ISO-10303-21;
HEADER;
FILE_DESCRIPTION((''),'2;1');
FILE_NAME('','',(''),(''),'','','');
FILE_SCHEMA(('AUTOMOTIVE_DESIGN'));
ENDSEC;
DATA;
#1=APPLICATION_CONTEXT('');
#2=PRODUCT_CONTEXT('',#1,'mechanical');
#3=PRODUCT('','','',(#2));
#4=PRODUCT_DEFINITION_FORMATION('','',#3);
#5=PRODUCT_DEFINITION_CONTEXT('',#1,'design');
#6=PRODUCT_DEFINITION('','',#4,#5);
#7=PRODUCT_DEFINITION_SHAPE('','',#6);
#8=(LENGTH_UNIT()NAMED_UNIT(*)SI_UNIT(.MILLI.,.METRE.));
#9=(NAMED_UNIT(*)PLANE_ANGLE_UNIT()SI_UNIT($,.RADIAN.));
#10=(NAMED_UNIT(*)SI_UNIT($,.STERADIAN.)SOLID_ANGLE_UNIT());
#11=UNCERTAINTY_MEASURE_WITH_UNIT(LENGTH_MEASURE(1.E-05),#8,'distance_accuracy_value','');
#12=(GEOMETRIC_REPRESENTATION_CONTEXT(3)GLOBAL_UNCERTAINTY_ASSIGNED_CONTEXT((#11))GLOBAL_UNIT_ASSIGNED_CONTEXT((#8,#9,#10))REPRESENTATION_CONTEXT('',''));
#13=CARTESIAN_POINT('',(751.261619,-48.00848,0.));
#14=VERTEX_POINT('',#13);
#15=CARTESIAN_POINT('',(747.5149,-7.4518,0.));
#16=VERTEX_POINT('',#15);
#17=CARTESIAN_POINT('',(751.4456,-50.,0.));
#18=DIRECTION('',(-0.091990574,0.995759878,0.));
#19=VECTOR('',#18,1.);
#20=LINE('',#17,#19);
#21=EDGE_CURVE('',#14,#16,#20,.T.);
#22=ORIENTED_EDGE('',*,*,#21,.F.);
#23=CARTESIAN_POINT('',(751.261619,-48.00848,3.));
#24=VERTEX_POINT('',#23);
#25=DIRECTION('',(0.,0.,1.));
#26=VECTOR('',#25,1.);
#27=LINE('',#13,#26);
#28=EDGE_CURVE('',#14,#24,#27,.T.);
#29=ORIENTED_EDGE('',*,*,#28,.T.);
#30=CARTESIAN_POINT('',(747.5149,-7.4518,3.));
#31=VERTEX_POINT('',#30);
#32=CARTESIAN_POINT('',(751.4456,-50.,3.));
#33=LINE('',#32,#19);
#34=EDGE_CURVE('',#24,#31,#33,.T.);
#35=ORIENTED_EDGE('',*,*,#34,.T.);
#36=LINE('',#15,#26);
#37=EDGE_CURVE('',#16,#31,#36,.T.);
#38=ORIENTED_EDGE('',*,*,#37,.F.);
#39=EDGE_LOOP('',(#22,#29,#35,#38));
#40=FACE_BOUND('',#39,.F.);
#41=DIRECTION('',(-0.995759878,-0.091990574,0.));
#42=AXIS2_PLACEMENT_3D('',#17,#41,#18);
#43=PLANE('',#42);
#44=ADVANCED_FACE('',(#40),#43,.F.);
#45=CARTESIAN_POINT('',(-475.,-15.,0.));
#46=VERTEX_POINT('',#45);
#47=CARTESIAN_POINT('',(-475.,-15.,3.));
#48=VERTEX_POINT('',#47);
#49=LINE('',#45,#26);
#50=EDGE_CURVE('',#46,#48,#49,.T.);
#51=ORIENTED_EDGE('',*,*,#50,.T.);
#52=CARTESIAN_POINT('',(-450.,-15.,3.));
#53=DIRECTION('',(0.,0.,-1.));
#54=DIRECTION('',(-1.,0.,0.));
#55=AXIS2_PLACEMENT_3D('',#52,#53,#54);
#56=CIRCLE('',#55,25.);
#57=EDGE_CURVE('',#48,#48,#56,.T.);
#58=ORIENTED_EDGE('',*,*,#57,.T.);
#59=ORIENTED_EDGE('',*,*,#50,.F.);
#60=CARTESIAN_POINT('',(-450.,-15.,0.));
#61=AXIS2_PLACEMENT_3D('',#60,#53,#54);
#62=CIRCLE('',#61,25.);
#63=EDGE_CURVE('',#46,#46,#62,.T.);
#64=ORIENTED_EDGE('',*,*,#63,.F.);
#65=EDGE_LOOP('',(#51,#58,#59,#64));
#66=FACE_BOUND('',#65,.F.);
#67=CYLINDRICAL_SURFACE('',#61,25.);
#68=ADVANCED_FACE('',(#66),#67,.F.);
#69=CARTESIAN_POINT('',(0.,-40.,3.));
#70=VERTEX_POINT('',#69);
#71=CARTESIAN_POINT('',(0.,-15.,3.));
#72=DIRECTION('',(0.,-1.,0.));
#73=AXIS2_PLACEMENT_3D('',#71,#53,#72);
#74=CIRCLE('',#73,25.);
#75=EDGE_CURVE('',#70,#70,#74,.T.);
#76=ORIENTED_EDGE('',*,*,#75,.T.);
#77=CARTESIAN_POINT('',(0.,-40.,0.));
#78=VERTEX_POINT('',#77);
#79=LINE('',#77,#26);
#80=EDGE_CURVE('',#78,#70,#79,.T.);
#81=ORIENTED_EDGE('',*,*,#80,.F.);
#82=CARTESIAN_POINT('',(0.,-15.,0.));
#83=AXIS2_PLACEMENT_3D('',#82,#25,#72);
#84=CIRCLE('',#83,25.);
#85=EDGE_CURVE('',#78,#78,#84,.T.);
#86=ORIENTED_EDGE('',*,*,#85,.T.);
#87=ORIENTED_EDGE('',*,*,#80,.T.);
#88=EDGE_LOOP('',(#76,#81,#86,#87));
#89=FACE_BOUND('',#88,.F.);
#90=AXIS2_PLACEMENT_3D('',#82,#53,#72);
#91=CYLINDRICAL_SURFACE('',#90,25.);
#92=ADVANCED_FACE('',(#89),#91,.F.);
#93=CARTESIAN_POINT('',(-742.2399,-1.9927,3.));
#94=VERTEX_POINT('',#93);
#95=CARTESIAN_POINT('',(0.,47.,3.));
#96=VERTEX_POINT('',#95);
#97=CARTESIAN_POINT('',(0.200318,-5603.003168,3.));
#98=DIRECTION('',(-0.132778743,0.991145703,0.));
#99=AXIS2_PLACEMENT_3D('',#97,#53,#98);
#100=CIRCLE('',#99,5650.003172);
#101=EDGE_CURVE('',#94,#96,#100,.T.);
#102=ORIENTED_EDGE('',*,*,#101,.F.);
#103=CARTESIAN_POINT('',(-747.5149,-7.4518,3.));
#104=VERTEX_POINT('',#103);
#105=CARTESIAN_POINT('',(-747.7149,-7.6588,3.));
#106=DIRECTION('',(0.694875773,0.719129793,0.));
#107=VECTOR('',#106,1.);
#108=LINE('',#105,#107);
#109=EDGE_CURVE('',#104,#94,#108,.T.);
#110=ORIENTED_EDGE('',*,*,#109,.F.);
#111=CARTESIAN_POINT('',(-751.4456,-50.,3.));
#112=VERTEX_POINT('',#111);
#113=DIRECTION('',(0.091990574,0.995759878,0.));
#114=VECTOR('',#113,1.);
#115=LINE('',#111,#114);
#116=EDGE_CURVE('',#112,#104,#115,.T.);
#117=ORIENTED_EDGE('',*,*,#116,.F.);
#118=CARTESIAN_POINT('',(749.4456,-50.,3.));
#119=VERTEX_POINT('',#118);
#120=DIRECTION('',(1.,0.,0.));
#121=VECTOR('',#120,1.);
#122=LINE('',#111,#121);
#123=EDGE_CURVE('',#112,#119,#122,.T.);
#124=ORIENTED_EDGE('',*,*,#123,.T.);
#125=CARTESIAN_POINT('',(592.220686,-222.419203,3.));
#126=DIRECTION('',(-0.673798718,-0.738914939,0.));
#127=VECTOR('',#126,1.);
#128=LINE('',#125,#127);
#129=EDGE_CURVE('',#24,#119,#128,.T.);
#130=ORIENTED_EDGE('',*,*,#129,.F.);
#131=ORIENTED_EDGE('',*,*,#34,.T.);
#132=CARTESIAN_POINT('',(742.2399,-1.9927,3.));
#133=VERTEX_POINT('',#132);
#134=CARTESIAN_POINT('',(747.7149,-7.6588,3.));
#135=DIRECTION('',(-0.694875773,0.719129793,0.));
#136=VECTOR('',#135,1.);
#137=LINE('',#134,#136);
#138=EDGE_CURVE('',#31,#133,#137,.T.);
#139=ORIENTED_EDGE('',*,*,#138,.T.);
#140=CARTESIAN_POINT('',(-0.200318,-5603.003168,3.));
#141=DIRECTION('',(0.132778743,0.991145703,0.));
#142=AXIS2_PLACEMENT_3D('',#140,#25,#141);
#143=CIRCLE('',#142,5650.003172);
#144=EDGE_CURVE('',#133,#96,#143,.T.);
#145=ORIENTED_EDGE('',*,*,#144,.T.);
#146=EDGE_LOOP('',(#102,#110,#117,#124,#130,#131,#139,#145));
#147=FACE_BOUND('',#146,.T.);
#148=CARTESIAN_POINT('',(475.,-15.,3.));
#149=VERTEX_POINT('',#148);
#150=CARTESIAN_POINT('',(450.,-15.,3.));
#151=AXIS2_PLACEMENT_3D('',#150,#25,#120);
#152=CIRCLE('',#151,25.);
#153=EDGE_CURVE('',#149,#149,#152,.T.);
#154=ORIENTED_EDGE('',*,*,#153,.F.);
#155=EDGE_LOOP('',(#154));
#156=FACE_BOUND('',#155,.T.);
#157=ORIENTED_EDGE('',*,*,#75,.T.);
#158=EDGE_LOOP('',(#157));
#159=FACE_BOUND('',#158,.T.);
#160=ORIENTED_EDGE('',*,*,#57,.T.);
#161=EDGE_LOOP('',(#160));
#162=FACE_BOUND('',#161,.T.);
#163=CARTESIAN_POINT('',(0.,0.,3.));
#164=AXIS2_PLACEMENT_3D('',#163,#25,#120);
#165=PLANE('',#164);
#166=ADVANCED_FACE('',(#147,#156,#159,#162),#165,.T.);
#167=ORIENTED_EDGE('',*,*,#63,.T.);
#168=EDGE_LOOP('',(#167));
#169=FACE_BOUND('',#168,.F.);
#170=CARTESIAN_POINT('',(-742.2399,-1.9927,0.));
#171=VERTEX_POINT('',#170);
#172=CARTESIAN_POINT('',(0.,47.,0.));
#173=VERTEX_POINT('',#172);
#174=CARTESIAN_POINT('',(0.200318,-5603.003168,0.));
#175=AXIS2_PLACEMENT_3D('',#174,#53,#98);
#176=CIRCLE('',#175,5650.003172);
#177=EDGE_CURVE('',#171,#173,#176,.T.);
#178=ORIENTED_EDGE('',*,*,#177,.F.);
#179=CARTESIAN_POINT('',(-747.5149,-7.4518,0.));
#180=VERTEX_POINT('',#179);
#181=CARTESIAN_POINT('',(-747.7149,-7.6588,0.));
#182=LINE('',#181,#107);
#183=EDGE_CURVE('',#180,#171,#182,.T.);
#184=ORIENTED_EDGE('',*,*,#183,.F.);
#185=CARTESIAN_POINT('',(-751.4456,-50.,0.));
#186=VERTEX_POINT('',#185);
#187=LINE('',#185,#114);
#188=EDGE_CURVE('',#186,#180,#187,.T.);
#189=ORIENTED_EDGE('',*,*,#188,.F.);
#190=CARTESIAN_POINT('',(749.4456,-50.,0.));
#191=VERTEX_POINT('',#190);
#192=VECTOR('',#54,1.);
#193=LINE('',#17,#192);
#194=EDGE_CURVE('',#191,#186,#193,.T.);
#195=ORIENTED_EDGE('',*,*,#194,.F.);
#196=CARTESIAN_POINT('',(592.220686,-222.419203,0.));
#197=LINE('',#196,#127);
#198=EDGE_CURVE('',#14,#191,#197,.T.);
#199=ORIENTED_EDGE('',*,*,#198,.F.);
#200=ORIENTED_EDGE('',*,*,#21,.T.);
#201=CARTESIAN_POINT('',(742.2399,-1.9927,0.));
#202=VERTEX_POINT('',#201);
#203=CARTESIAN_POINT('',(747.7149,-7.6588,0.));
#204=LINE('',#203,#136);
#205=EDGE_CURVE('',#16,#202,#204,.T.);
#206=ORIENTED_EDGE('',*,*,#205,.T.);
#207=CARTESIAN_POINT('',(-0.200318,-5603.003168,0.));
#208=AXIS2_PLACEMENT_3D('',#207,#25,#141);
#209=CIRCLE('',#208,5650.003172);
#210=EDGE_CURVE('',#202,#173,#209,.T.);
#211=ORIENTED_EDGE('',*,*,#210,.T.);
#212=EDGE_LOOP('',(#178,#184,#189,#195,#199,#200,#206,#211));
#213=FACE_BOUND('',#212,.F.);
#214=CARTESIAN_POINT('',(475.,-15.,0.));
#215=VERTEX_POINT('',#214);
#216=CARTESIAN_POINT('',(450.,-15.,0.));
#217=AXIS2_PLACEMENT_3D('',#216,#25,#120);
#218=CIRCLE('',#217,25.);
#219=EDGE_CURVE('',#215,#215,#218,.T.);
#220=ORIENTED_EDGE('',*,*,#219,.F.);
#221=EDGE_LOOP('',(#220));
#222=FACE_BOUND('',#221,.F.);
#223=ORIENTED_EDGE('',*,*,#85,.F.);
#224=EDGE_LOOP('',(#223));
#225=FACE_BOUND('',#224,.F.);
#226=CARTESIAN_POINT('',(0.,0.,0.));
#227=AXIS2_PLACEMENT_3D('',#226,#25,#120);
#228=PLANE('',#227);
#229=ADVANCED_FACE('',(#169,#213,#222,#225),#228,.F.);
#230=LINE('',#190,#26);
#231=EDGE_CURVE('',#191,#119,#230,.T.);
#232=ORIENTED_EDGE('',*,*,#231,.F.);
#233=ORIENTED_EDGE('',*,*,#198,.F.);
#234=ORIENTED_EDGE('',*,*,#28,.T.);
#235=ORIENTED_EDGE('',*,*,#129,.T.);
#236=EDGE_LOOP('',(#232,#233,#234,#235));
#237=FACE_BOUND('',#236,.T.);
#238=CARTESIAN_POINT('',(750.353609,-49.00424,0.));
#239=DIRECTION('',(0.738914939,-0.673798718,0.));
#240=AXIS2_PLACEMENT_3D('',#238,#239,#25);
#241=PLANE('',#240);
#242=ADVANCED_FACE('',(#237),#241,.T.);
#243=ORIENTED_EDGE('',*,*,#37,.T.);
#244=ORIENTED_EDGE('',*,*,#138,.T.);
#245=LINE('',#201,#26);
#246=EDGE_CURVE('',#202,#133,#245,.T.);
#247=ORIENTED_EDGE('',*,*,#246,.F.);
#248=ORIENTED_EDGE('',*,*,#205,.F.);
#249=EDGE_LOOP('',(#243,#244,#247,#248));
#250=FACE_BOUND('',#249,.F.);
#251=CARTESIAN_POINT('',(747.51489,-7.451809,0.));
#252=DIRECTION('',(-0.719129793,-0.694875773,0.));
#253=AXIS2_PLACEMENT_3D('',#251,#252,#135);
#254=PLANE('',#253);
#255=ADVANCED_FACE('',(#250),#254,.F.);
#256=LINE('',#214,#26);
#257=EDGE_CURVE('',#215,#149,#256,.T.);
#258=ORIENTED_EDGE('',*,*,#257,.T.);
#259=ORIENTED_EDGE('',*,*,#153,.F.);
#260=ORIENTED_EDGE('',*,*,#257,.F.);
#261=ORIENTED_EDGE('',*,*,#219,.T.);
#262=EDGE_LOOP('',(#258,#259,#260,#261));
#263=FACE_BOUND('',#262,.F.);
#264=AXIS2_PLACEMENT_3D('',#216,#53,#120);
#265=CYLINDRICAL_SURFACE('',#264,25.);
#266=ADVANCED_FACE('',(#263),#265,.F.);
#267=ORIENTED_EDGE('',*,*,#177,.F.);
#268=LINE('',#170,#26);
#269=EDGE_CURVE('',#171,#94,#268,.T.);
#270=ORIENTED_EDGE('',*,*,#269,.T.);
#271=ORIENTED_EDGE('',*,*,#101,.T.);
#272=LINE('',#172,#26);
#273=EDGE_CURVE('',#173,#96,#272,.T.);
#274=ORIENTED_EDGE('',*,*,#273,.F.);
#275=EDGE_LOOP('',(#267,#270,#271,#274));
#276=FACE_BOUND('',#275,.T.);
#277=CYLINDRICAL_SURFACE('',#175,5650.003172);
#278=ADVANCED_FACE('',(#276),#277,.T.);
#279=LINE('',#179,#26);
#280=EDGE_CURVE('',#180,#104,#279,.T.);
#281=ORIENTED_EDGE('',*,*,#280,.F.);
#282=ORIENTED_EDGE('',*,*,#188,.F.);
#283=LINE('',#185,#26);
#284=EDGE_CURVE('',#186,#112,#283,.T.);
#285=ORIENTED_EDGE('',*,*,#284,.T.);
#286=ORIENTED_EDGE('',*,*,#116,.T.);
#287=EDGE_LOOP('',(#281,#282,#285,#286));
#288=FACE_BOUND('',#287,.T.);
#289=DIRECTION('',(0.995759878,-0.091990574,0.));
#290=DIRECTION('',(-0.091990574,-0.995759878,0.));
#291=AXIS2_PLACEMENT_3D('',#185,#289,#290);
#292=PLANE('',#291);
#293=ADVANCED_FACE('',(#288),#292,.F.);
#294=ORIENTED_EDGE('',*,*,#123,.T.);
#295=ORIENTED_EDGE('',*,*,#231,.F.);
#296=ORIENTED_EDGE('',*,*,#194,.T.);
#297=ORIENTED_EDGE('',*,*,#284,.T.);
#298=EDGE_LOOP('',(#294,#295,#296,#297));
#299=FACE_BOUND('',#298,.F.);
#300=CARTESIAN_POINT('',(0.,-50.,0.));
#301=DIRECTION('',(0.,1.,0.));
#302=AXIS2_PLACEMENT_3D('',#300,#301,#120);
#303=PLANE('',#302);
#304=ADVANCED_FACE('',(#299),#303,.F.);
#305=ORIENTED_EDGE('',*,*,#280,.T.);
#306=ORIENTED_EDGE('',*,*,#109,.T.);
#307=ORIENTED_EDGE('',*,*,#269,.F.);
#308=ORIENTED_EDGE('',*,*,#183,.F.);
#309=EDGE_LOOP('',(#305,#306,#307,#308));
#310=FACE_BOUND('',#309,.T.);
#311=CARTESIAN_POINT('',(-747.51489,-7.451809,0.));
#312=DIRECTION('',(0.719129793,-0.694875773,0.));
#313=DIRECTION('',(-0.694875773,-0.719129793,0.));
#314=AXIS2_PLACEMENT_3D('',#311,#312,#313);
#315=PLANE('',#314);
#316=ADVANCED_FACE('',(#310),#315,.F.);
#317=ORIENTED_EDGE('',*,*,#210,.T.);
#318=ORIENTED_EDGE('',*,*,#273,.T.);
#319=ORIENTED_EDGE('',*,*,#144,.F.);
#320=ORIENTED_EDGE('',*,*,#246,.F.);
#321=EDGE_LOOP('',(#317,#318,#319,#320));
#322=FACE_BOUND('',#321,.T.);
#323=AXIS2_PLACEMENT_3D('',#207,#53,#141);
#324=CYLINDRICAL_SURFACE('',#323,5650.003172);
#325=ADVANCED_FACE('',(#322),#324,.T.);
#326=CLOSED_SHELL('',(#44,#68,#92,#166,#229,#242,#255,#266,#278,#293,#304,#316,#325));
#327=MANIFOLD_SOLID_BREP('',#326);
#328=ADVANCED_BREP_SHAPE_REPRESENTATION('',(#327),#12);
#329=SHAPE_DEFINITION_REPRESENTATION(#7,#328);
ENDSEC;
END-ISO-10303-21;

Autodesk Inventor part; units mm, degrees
ref_plane "YZ Plane" through (0, 0, 0) normal (1, 0, 0) x (0, 1, 0)
ref_plane "XZ Plane" through (0, 0, 0) normal (0, 1, 0) x (-1, 0, 0)
ref_plane "XY Plane" through (0, 0, 0) normal (0, 0, 1) x (1, 0, 0)
sketch "Sketch1" plane through (0, 0, 0) normal (0, 0, 1) x (1, 0, 0)
  line L0 (-750, 0) -> (750, 0) construction
  line L1 (750, 0) -> (750, -2700) construction
  line L2 (750, -2700) -> (-750, -2700) construction
  line L3 (-750, -2700) -> (-750, 0) construction
  line L4 (800, 50) -> (-800, 50) construction
  line L5 (-800, 50) -> (-800, -2750) construction
  line L6 (-800, -2750) -> (800, -2750) construction
  line L7 (800, -2750) -> (800, 50) construction
  line L8 (-850, 100) -> (850, 100) construction
  line L9 (850, 100) -> (850, -2800) construction
  line L10 (850, -2800) -> (-850, -2800) construction
  line L11 (-850, -2800) -> (-850, 100) construction
  arc A0 (750, 0) -> (745.2706, 0.6314) centre (0, -5600) ccw construction
  line L12 (-750, -2100) -> (750, -2100) construction
  line L13 (114.1118, -2698.3696) -> (750, -2100) construction
  arc A1 (750, -2100) -> (771.0671, -250.888) centre (-10250, -1050) ccw construction
  line L14 (750, 0) -> (749.6018, -2.9735) construction
  arc A2 (750, -3.0268) -> (0, 47) centre (-0.2, -5603) ccw
  line L15 (750, 0) -> (747.0136, -0.2851) construction
  arc A3 (768.075, -251.105) -> (747.4657, -5.0326) centre (-10252.9897, -1050.251) ccw construction
  arc A4 (750.4522, -4.7486) -> (745.2706, 0.6314) centre (744.4791, -5.3162) ccw construction
  arc A5 (747.4657, -5.0326) -> (744.8748, -2.3426) centre (744.4792, -5.3164) ccw construction
  line L16 (750, -2100) -> (752.9864, -2100.2851) construction
  arc A6 (752.9864, -2100.2851) -> (772.2226, -225.7318) centre (-10246.9893, -1050.0309) ccw construction
  line L17 (750, -2100) -> (752.0559, -2102.1848) construction
  line L18 (752.0559, -2102.1848) -> (752.0559, -2102.1848) construction
  arc A7 (749.1768, -2100.7746) -> (750.1074, -2098.8746) centre (747.1209, -2098.5898) ccw construction
  line L19 (0, -2697) -> (110, -2697) construction
  line L20 (112.0559, -2696.1848) -> (676.8655, -2164.7001) construction
  arc A8 (110, -2700) -> (114.1118, -2698.3696) centre (110, -2694) ccw construction
  arc A9 (110, -2697) -> (112.0559, -2696.1848) centre (110, -2694) ccw construction
  line L21 (676.8655, -2164.7001) -> (678.9214, -2166.8849) construction
  line L22 (752.0559, -2102.1848) -> (662.7706, -2186.2021) construction
  line L23 (662.7706, -2186.2021) -> (660.7147, -2184.0173) construction
  arc A10 (747.4657, -5.0326) -> (747.0136, -0.2851) centre (-10252.9897, -1050.251) ccw construction
  arc A11 (745.2706, 0.6314) -> (0, 50) centre (0, -5600) ccw construction
  arc A12 (750.4522, -4.7486) -> (750, 0) centre (-10250, -1050) ccw construction
  line L24 (771.0671, -250.888) -> (768.075, -251.105) construction
  line L25 (769.231, -225.9556) -> (772.2226, -225.7318) construction
  arc A13 (771.0671, -250.888) -> (750.4522, -4.7486) centre (-10250, -1050) ccw construction
  line L26 (0, 100) -> (0, 50) construction
  line L27 (0, -2700) -> (0, -2697) construction
  line L28 (0, 47) -> (0, 0) construction
  line L29 (0, 50) -> (0, 47) construction
  arc A14 (752.0559, -2102.1848) -> (752.9864, -2100.2851) centre (749.9998, -2099.9999) ccw construction
  line L30 (0, 47) -> (0, -50)
  line L31 (0, -50) -> (751.6456, -50)
  circle A15 centre (450, -15) radius 25
  arc A16 (0, -40) -> (0, 10) centre (0, -15) ccw
  line L32 (747.7149, -7.6588) -> (742.2399, -1.9927)
  line L33 (751.4456, -50) -> (747.5149, -7.4518)
  point P0 (0, -2750)
  point P1 (0, 48.5)
  point P2 (747.2399, -2.6588)
  dimension "d85" = 40
  dimension "d54" = 1500
  dimension "d55" = 2700
  dimension "d58" = 2100
  dimension "d68" = 6
  dimension "d70" = 3
  dimension "d75" = 3
  dimension "d83" = 6
  dimension "d86" = 3
  dimension "d112" = 251.771
  dimension "d113" = 50
  dimension "d114" = 50
  dimension "d115" = 3
  dimension "d117" = 110
  dimension "d118" = 25
  dimension "d119" = 122.6
  dimension "d120" = 25
  dimension "d121" = 50
  dimension "d122" = 50
  dimension "d123" = 450
  dimension "d124" = 35
  dimension "d126" = 98.5
  dimension "d127" = 5
  dimension "d128" = 5
  dimension "d132" = 0.2
  dimension "d133" = 0.2
extrude "Plate3" add sketch "Sketch1" along normal blind 3 contours L32 L33 L31 L30 A16 A2
mirror "Mirror3" about plane through (0, 0, 0) normal (1, 0, 0)
chamfer "Corner Chamfer2" distance 2 angle 45 1 edges at (751.4456, -50, 1.5)
equation "\"BendRadius\" = Thickness"
equation "\"BendReliefWidth\" = Thickness"
equation "\"BendReliefDepth\" = 0.5 * Thickness"
equation "\"CornerReliefSize\" = 4 * Thickness"
equation "\"MinimumRemnant\" = 2 * Thickness"
equation "\"TransitionRadius\" = BendRadius"
equation "\"JacobiRadiusSize\" = BendRadius"
equation "\"GapSize\" = Thickness"
equation "\"Thickness\" = 3"
properties part number "MSC 208 sheet back mould" material "Stainless Steel AISI 304"
